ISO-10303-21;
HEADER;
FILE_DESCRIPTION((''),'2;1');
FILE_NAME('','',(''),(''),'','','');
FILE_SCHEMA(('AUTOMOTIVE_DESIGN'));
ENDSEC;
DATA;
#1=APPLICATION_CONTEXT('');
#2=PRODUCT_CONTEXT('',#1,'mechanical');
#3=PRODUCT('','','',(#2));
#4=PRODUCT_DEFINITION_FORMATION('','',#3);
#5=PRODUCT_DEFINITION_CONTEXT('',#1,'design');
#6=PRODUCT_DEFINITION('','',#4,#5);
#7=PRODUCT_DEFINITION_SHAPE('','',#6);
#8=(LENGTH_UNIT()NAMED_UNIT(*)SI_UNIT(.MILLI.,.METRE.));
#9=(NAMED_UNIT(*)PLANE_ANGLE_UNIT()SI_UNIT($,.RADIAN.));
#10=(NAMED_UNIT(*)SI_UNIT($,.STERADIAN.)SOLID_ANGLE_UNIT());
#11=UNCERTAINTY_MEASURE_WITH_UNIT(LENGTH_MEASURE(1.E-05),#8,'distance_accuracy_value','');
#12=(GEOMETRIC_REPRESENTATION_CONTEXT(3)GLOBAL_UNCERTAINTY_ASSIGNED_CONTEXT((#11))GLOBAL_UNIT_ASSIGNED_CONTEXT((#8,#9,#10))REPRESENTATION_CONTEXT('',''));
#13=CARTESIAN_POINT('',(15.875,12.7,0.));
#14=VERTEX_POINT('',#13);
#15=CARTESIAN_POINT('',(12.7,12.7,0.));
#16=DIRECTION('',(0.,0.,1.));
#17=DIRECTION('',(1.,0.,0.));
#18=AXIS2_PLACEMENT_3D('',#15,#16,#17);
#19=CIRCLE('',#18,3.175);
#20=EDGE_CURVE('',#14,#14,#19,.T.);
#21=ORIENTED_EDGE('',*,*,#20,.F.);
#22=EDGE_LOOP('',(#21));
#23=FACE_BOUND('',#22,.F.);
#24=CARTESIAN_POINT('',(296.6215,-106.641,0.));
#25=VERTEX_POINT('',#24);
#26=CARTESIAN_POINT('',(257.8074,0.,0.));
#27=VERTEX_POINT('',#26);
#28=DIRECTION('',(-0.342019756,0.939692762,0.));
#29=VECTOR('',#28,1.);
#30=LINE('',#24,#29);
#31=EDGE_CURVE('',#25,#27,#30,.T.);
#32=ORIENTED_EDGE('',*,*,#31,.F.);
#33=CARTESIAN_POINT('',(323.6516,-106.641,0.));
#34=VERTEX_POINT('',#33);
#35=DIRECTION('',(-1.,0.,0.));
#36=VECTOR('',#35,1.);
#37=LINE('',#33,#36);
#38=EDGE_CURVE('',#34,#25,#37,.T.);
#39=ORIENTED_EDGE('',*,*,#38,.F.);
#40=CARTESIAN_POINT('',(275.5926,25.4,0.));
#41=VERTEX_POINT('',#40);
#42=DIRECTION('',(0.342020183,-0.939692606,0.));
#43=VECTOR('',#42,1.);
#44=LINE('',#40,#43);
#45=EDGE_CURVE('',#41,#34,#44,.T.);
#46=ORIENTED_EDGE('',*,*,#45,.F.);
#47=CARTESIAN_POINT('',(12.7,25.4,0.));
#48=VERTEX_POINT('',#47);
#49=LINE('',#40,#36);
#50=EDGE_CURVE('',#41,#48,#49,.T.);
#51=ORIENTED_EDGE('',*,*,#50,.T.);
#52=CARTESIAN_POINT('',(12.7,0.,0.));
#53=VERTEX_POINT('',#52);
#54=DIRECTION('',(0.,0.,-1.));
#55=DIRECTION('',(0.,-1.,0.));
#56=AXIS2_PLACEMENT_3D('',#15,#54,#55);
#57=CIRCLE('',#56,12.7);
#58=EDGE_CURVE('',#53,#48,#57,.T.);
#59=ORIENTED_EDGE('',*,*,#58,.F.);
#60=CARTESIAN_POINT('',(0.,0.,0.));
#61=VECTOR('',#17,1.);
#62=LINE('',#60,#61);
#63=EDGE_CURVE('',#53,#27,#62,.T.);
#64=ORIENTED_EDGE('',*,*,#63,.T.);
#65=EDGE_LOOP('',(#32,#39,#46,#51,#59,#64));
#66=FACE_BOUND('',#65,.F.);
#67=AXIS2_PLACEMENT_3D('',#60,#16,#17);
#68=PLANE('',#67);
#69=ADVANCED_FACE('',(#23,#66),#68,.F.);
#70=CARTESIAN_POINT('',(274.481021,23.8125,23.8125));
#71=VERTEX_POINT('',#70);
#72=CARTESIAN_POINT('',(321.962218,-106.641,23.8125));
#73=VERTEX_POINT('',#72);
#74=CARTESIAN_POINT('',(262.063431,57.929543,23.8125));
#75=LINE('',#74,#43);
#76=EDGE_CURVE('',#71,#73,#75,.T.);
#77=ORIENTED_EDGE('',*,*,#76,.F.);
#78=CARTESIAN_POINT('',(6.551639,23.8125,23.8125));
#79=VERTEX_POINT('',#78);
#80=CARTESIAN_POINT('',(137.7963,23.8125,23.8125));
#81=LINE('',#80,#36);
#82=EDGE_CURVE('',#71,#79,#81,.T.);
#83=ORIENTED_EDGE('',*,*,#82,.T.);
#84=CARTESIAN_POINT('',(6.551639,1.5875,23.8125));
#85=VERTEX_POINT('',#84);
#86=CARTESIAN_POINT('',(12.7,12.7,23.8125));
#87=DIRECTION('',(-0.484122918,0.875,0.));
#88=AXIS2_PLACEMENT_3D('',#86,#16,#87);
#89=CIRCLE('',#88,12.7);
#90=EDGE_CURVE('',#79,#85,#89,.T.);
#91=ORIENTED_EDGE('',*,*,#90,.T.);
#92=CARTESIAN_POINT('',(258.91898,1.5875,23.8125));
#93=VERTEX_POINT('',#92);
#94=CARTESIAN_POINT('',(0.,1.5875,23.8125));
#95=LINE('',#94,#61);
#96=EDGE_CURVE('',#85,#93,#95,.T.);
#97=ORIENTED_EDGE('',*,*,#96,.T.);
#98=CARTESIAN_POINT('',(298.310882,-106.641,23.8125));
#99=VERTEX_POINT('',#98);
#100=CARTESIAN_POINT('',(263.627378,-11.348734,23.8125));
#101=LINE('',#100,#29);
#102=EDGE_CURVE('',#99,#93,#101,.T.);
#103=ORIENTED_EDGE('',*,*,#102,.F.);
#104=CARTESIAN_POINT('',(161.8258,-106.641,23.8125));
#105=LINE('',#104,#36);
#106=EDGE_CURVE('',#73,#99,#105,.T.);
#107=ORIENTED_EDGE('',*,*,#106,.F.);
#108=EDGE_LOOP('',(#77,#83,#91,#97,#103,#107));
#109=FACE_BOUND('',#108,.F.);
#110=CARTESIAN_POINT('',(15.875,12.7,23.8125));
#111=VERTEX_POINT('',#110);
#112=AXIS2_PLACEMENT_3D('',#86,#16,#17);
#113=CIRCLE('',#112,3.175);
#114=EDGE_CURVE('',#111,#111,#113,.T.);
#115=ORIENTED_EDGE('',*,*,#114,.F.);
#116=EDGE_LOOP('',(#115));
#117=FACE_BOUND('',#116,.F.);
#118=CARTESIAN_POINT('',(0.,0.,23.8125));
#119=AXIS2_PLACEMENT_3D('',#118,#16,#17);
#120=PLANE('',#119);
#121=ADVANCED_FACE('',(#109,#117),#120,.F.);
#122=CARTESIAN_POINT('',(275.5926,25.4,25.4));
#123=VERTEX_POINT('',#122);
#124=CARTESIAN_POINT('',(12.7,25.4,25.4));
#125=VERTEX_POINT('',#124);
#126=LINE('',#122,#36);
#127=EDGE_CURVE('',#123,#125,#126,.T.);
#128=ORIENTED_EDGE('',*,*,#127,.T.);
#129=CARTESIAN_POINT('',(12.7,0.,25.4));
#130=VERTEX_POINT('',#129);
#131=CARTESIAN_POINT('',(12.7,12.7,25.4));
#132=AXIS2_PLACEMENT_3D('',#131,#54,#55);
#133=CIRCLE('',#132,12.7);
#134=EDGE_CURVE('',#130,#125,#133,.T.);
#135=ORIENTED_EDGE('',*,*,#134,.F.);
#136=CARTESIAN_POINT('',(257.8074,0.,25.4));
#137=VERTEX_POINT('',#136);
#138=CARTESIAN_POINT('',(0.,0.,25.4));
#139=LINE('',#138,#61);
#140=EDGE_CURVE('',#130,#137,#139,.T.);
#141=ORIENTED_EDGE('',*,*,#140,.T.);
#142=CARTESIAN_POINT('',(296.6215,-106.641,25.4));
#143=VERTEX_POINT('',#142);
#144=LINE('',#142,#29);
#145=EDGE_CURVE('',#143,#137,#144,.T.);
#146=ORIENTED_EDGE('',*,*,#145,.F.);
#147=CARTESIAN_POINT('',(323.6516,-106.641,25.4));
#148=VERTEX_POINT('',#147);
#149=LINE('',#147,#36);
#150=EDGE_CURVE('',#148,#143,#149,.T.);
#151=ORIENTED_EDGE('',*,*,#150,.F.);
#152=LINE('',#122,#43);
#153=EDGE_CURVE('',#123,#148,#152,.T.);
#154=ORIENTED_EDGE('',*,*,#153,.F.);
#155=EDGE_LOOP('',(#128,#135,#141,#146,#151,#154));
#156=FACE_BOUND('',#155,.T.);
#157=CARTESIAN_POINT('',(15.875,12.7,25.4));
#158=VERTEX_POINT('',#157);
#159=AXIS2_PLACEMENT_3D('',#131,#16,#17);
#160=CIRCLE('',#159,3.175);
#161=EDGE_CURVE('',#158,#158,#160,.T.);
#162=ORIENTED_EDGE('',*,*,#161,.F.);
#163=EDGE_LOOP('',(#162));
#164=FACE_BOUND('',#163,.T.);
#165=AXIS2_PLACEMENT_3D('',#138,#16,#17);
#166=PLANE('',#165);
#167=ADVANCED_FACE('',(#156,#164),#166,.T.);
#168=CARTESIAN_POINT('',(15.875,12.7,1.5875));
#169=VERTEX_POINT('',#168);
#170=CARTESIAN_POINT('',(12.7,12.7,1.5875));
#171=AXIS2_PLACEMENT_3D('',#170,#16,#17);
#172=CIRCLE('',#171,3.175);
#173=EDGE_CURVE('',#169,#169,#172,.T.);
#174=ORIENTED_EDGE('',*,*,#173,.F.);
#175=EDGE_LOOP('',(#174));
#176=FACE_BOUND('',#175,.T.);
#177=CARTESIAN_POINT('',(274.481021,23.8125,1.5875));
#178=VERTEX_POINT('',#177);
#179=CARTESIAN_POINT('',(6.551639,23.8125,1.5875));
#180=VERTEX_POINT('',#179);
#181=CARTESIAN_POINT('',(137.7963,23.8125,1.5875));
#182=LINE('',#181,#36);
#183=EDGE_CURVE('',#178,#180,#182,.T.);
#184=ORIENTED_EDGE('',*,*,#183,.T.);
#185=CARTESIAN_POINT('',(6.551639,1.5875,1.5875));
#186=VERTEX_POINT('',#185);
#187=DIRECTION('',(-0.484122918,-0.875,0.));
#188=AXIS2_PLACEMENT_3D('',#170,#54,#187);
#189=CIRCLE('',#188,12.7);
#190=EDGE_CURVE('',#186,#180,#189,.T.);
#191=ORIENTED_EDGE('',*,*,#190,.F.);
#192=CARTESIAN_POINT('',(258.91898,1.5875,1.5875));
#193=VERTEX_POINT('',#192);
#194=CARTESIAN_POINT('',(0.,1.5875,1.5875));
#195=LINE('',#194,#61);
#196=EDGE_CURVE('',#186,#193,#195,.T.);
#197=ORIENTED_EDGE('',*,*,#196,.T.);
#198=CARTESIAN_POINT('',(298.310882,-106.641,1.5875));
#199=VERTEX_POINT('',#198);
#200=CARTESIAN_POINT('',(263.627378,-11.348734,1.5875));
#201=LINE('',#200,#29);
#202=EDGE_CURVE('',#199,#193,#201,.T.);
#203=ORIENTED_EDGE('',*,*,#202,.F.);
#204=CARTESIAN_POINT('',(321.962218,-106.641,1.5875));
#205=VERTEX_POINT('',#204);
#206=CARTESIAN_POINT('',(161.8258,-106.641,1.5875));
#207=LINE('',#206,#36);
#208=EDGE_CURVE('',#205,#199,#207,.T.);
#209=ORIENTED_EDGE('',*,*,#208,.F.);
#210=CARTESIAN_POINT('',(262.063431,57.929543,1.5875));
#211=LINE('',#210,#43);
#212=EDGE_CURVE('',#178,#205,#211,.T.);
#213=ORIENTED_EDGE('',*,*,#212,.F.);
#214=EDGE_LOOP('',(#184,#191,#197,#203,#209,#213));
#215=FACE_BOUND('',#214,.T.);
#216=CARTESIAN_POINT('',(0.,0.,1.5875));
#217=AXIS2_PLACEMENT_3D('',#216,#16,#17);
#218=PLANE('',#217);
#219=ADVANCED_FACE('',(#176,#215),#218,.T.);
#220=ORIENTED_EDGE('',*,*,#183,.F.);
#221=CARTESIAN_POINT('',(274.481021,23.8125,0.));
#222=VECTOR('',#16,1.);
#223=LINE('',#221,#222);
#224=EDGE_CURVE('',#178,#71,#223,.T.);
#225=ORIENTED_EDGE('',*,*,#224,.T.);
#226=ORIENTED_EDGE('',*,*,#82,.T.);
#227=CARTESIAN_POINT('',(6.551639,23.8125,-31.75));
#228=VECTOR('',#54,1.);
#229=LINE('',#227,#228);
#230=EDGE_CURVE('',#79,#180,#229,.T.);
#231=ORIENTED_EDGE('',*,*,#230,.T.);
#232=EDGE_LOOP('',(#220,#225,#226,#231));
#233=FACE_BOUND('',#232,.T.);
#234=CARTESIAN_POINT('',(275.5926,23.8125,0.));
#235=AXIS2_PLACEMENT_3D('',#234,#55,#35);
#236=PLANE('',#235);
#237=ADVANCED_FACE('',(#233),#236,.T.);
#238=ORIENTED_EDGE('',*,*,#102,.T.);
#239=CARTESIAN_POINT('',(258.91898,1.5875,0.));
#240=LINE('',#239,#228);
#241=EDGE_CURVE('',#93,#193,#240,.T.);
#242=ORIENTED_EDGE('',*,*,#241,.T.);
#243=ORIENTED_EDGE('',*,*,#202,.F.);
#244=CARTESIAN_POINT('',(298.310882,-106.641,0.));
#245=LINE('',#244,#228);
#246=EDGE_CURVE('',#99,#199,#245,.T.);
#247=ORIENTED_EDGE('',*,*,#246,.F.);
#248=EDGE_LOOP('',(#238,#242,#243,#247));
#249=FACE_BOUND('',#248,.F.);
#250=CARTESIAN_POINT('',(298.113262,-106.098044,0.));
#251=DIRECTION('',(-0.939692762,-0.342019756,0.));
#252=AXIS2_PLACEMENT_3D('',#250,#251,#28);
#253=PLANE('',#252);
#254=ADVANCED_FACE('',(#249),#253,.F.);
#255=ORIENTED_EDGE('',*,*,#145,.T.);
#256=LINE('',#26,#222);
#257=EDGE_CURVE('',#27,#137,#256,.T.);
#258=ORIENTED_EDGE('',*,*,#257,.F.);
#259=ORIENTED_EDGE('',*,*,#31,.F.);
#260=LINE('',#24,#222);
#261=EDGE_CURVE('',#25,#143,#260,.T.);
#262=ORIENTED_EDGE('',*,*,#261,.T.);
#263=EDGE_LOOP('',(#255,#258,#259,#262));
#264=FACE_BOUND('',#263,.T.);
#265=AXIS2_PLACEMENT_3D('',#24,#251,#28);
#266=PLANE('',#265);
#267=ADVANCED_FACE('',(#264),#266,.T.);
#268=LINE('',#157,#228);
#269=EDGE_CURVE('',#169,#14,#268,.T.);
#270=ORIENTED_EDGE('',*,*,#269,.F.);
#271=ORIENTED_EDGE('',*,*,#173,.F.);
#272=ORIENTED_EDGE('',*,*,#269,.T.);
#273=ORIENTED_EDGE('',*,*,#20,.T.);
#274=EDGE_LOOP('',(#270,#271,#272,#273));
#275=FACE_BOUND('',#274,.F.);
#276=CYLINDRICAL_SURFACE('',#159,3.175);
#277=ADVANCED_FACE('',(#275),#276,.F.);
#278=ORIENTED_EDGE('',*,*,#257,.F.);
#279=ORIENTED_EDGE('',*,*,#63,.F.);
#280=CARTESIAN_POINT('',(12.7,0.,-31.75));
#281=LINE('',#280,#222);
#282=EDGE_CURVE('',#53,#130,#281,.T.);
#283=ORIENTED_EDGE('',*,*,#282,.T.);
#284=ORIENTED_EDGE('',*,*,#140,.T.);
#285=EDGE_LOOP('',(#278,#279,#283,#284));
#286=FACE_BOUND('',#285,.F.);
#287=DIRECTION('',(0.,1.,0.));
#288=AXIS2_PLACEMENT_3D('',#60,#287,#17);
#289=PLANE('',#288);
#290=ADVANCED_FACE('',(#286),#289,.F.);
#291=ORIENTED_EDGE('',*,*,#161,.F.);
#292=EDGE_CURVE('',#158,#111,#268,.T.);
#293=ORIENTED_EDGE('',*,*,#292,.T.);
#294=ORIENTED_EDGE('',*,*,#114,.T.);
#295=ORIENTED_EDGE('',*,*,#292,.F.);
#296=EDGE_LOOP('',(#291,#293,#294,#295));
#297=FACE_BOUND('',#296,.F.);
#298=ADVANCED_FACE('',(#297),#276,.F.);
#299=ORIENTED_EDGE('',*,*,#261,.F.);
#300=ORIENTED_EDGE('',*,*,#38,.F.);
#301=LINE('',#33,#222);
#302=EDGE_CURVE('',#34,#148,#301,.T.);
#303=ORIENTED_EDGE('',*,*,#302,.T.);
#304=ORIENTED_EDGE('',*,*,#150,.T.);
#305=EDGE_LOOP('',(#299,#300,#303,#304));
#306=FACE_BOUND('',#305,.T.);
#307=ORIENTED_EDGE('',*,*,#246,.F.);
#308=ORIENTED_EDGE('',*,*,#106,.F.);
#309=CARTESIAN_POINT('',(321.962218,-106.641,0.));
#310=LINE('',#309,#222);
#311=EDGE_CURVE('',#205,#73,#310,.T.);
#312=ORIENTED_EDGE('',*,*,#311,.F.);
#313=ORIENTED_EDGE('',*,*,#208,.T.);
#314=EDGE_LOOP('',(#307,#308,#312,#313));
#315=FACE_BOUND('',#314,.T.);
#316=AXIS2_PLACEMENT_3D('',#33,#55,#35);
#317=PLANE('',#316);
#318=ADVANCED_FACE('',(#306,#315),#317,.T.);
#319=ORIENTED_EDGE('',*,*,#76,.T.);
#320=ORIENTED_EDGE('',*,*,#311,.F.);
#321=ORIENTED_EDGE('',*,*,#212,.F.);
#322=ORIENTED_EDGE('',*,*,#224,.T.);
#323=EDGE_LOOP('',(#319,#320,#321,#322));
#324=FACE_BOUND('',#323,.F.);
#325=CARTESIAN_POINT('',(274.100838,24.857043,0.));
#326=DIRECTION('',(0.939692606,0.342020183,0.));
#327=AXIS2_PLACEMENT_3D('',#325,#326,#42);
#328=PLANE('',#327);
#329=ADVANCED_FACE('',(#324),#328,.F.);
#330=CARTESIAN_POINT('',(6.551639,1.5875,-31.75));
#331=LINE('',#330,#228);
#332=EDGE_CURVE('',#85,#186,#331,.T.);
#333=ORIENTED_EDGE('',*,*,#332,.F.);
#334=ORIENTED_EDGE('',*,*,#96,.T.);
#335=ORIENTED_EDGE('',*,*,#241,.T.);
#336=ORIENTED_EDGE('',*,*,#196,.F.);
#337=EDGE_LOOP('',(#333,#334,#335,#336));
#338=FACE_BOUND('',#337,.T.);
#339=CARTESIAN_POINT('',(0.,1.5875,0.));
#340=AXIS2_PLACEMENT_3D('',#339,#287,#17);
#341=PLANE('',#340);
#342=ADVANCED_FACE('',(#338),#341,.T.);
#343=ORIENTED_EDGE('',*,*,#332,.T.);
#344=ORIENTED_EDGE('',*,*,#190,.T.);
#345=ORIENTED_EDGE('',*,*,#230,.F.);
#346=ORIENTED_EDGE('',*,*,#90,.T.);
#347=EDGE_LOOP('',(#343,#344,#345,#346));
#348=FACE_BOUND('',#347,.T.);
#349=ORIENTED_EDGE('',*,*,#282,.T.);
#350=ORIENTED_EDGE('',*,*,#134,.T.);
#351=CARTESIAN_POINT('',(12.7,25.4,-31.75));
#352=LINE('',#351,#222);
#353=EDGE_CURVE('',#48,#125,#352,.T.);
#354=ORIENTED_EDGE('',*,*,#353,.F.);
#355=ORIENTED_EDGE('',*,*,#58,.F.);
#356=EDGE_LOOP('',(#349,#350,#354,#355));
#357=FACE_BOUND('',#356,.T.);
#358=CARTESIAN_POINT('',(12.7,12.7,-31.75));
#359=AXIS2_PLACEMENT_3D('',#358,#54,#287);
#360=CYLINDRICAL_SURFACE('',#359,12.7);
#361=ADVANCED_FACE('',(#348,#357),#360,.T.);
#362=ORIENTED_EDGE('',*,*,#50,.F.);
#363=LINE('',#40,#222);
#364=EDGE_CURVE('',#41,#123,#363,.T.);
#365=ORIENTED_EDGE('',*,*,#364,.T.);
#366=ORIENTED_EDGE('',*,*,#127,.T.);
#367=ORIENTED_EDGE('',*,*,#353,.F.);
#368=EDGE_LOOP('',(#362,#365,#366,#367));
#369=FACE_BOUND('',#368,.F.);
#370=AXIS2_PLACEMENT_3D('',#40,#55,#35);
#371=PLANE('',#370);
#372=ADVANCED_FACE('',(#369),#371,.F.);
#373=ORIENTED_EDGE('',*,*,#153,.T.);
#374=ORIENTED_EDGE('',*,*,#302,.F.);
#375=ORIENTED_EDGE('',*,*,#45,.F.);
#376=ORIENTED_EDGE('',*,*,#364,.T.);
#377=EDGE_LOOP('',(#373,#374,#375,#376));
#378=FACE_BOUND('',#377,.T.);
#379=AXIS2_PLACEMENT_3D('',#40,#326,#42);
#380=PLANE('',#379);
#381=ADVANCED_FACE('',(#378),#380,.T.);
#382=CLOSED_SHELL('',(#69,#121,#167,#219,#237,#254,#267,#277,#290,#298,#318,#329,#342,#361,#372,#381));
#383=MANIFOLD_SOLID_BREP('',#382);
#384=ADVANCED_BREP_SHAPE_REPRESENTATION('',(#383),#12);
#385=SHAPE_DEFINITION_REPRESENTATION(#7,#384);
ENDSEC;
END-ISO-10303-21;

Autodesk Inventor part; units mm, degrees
ref_plane "YZ Plane" through (0, 0, 0) normal (1, 0, 0) x (0, 1, 0)
ref_plane "XZ Plane" through (0, 0, 0) normal (0, 1, 0) x (-1, 0, 0)
ref_plane "XY Plane" through (0, 0, 0) normal (0, 0, 1) x (1, 0, 0)
sketch "Sketch1" plane through (0, 0, 0) normal (0, 0, 1) x (1, 0, 0)
  line L0 (0, 0) -> (257.8074, 0)
  line L1 (275.5926, 25.4) -> (0, 25.4)
  line L2 (0, 25.4) -> (0, 0)
  line L3 (0, 12.7) -> (266.7, 12.7) construction
  line L4 (266.7, 12.7) -> (310.1366, -106.641) construction
  line L5 (275.5926, 25.4) -> (323.6516, -106.641)
  line L6 (323.6516, -106.641) -> (296.6215, -106.641)
  line L7 (296.6215, -106.641) -> (257.8074, 0)
  dimension "d4" = 25.4
  dimension "d5" = 110
  dimension "d6" = 266.7
  dimension "d7" = 127
  dimension "d17" = 110
  dimension "d18" = 25.4
extrude "Extrusion3" add sketch "Sketch1" along normal blind 25.4
shell "Shell3" thickness 1.5875 removed faces 2 at (0, 16.9333, 8.4667) at (305.6315, -106.641, 8.4667)
sketch "Sketch4" plane through (0, 0, 25.4) normal (0, 0, 1) x (1, 0, 0)
  line L0 (0, 0) -> (0, 25.4) projected
  line L1 (257.8074, 0) -> (0, 0) projected
  circle A0 centre (12.7, 12.7) radius 3.175
  dimension "d21" = 6.35
  dimension "d22" = 12.7
  dimension "d23" = 12.7
extrude "Extrusion4" cut sketch "Sketch4" against normal through all
fillet "Fillet2" radius 12.7 2 edges at (0, 0, 12.7) (0, 25.4, 12.7)
properties part number "UpperArm" material "Aluminum-6061"
